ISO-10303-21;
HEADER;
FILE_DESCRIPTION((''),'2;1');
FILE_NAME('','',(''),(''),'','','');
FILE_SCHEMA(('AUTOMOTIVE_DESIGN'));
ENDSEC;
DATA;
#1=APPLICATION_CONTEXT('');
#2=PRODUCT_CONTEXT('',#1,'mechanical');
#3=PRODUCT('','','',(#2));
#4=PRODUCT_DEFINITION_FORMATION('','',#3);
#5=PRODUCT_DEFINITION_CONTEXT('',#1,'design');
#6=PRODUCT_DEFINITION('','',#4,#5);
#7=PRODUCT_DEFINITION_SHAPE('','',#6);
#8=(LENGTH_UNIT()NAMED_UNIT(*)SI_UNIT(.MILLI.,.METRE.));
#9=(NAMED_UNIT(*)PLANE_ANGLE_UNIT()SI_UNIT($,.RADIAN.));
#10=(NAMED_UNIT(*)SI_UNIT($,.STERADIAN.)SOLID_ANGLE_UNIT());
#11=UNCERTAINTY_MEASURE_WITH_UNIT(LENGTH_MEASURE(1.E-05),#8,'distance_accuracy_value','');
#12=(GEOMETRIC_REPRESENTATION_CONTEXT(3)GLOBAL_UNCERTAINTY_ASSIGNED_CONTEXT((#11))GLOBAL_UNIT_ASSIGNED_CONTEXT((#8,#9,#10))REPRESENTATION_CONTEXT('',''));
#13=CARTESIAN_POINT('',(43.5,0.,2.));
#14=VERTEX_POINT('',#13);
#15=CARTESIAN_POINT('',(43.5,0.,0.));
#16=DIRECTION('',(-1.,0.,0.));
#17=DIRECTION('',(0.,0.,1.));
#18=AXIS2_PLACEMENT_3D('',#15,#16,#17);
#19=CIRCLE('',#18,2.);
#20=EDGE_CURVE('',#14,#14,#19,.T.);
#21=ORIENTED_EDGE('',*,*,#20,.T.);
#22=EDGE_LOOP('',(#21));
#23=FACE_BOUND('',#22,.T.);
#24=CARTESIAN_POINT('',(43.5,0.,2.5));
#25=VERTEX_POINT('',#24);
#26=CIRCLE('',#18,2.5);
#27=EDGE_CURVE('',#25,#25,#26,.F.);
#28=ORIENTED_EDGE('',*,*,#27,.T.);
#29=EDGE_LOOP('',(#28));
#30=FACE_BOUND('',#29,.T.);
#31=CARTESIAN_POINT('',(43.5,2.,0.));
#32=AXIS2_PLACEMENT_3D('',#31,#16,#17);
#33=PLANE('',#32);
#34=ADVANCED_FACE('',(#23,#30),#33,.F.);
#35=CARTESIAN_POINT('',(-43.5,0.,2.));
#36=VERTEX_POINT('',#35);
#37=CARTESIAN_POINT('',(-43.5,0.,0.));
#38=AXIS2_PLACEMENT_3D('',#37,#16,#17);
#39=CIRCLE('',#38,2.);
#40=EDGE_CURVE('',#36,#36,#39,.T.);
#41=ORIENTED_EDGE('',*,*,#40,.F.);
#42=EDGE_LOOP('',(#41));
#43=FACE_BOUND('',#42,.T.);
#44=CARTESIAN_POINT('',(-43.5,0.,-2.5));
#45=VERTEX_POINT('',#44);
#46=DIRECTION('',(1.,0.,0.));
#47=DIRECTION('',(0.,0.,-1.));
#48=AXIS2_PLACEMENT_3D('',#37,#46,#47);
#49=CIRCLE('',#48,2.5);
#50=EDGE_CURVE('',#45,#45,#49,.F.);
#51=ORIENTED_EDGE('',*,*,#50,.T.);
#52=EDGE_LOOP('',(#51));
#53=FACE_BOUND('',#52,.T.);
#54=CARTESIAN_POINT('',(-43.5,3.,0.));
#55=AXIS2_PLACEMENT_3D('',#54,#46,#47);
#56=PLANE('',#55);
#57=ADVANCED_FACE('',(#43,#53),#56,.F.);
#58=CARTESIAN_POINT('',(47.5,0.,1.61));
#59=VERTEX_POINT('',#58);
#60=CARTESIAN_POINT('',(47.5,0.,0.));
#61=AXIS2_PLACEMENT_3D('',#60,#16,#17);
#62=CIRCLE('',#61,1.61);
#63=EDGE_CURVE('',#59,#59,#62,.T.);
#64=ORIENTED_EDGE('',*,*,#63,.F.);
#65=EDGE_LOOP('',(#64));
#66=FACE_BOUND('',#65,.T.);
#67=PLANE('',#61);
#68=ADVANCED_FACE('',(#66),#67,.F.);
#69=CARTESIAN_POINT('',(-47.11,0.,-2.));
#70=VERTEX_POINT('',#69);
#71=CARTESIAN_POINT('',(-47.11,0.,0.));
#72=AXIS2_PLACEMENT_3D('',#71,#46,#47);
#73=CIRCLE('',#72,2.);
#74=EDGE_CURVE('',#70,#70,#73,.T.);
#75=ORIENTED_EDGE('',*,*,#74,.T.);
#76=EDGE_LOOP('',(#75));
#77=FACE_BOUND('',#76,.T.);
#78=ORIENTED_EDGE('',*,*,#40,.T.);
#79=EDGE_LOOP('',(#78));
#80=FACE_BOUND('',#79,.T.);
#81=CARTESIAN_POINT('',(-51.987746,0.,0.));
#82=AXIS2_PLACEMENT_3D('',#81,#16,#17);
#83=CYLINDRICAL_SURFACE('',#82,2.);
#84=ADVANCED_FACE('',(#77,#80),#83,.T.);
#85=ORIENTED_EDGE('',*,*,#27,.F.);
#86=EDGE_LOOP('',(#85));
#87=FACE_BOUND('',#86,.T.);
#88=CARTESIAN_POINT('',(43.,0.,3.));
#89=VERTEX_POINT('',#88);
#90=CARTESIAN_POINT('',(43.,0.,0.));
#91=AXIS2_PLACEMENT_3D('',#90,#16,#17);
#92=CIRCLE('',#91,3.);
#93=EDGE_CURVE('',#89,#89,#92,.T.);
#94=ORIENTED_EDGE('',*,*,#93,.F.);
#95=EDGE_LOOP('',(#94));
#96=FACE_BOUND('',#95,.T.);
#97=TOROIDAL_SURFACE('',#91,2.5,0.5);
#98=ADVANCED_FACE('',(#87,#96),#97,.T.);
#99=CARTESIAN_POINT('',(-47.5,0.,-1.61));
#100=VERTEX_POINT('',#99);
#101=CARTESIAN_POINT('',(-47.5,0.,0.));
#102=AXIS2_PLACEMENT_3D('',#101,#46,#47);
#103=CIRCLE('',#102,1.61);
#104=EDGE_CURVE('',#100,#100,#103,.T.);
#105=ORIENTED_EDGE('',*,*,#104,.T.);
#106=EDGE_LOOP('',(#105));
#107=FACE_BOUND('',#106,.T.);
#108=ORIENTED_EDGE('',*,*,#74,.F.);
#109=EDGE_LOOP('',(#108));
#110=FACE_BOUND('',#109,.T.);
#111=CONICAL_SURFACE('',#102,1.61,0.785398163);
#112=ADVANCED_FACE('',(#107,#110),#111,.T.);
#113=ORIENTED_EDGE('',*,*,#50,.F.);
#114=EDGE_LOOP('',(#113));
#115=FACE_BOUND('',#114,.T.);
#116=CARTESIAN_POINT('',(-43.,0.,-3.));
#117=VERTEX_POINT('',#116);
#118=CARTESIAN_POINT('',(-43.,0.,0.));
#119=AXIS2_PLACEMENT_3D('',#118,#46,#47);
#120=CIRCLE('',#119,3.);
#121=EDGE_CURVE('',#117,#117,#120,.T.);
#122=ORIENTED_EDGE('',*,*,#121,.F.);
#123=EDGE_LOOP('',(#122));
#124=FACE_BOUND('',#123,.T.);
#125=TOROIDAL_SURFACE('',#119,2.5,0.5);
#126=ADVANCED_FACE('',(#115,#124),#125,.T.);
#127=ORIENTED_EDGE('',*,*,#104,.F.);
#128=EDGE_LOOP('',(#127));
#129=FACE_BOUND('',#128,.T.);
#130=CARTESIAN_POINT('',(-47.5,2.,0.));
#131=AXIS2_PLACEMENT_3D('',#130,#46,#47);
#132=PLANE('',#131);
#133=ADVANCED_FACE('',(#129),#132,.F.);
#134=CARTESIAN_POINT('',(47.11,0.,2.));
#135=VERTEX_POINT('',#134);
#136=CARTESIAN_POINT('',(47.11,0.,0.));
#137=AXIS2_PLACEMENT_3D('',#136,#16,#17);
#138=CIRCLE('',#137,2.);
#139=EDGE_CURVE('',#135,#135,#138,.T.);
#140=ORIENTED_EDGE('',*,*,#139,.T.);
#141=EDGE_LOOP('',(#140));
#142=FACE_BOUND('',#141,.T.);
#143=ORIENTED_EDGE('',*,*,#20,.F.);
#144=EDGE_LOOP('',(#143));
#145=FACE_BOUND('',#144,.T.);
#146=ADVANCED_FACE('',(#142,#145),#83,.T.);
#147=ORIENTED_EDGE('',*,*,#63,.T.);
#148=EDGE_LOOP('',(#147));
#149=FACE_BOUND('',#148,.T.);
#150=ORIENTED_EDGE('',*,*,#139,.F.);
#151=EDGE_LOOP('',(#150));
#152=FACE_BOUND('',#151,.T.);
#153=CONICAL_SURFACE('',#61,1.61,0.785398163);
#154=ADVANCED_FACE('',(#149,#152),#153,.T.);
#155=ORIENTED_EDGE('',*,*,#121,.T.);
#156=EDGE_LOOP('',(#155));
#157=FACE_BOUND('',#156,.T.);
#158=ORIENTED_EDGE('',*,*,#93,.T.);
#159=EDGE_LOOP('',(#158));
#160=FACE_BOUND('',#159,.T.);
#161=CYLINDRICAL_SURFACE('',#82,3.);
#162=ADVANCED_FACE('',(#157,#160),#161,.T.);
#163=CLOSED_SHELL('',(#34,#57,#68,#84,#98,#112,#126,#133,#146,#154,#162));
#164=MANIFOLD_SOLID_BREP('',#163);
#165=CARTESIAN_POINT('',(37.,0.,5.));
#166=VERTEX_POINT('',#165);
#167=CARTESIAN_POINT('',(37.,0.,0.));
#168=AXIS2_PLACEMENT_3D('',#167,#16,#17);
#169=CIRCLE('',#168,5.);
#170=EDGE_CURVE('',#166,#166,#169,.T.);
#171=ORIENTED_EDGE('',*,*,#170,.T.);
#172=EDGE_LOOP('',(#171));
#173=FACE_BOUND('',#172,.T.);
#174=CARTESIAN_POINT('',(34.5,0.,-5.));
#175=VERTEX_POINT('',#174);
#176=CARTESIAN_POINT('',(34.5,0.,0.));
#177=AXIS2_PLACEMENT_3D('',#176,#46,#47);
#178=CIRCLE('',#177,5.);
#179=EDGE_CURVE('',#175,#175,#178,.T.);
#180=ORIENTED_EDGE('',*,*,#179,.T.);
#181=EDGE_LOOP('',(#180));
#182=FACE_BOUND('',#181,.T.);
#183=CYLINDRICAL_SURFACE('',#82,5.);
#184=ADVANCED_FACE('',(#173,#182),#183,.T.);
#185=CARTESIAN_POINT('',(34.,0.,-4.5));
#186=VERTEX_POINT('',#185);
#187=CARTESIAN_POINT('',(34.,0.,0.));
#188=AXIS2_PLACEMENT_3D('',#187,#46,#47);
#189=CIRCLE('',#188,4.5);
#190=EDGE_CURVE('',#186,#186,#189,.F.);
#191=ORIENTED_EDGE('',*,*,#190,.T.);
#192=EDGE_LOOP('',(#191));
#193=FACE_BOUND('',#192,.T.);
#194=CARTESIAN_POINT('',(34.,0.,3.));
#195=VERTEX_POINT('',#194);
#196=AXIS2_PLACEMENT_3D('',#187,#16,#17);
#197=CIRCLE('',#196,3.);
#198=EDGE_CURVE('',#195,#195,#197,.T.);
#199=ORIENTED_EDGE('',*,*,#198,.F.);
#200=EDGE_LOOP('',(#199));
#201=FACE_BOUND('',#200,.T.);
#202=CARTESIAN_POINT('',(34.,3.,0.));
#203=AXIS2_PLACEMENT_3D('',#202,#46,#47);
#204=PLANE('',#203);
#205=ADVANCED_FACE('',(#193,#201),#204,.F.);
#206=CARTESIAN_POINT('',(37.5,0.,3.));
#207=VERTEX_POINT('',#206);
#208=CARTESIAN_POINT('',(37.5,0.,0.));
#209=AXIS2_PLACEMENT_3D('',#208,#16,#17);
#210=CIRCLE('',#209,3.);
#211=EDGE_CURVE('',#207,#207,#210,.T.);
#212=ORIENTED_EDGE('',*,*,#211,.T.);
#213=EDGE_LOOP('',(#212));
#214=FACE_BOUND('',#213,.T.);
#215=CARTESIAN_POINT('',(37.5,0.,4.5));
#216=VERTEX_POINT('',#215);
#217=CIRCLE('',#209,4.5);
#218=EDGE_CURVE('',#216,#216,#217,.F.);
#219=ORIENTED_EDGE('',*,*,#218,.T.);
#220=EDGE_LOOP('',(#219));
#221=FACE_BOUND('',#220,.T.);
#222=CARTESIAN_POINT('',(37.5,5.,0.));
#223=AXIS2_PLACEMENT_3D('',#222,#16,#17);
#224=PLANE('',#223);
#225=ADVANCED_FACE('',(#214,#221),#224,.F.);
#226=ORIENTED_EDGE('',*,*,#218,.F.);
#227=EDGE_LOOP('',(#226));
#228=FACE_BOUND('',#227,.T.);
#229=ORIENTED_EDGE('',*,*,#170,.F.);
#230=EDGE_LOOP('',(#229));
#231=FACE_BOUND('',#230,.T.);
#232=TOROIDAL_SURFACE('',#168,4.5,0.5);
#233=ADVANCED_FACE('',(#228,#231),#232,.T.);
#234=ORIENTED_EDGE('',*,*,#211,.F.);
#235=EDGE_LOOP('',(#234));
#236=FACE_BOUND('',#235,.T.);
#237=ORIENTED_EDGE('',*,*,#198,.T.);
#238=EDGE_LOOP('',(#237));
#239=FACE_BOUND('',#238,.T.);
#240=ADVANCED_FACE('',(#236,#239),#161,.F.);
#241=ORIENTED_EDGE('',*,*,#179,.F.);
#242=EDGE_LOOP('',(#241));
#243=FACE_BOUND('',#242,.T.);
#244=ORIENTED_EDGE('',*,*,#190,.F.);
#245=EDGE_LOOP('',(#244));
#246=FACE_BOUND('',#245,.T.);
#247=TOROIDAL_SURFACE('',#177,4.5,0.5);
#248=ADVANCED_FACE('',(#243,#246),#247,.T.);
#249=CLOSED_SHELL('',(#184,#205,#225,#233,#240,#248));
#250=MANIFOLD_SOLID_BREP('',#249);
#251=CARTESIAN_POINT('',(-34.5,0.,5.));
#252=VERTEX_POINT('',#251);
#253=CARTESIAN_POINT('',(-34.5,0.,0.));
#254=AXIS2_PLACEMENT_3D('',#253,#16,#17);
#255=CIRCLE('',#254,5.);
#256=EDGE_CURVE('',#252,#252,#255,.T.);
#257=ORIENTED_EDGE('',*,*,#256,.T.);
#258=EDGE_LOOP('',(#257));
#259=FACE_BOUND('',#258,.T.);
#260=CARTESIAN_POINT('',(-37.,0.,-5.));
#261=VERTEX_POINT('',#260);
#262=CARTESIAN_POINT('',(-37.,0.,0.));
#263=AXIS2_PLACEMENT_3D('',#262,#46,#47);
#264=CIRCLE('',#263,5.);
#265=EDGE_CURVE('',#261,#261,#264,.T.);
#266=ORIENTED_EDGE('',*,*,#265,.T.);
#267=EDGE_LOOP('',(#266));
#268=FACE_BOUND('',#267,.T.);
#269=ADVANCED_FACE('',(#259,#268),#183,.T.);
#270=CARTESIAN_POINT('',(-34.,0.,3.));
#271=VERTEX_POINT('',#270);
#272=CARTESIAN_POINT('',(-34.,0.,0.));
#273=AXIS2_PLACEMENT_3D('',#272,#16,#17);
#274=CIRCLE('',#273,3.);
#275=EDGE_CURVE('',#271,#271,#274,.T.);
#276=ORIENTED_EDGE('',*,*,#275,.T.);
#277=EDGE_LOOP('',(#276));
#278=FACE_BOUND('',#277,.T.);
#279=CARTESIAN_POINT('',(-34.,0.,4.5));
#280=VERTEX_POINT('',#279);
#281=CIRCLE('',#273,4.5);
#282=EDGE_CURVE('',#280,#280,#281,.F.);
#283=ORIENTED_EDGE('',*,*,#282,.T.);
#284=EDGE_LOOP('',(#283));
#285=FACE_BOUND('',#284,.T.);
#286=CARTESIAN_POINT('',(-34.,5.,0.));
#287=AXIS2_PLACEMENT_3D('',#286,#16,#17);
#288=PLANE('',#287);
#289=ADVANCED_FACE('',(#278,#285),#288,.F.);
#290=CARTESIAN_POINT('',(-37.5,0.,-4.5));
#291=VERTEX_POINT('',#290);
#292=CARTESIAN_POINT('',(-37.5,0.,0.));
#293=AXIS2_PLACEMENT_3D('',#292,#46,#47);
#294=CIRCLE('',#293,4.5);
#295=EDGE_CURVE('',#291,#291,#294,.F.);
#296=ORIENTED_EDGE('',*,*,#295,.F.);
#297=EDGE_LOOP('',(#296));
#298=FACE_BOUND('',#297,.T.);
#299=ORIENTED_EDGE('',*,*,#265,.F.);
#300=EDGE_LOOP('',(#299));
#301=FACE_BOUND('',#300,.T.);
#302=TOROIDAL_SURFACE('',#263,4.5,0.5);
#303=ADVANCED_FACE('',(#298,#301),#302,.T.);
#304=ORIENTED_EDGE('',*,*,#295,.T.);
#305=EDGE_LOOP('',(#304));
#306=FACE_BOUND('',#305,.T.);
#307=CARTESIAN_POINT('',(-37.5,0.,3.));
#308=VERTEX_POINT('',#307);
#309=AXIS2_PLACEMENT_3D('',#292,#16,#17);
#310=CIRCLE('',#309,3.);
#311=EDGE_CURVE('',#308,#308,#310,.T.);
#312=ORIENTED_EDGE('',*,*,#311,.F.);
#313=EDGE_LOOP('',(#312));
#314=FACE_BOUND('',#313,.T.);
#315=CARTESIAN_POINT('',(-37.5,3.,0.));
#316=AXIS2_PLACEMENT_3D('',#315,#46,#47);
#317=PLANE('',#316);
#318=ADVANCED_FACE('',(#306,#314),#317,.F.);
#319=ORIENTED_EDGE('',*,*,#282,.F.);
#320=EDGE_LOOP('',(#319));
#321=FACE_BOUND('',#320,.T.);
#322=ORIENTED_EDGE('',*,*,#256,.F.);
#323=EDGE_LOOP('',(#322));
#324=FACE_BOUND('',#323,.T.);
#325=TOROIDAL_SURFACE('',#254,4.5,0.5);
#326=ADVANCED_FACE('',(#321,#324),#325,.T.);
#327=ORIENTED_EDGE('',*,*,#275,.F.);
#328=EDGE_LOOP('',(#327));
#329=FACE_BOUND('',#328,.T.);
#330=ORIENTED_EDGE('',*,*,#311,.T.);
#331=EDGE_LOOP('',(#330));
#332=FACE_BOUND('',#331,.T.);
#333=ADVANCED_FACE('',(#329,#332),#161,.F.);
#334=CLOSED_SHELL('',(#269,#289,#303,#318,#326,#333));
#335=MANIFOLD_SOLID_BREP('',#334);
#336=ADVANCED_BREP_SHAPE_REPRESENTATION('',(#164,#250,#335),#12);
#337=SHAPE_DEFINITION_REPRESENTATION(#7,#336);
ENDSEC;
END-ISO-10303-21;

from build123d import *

# Parameters (mm, degrees)
SKETCH2_W = 3.5
SKETCH2_H = 2
FILLET1_R = 0.5
FILLET2_R = 0.5
FILLET3_R = 0.5


# Read off the part's stored shape, not the designer's step: M4x0.7 Machine Threads Stud1, M4x0.7 Machine Threads Stud2
with BuildPart() as part:
    # Sketch1 → Revolve1 (revolve)
    with BuildSketch(Plane.XY, mode=Mode.PRIVATE) as revolve1_sk:
        Polygon((47.5, 0), (47.5, 2), (43.5, 2), (43.5, 3), (-43.5, 3), (-43.5, 2), (-47.5, 2), (-47.5, 0), align=None)
    revolve(revolve1_sk.sketch.rotate(Axis((-51.987746382, 0, 0), (1, 0, 0)), 90), axis=Axis((-51.987746382, 0, 0), (1, 0, 0)))

    # M4x0.7 Machine Threads Stud1 outline → M4x0.7 Machine Threads Stud1 (revolve, cut)
    with BuildSketch(Plane.YX):
        Polygon((2, 47.5), (1.61, 47.5), (2, 47.11), align=None)
    revolve(axis=Axis((0, 0, 0), (1, 0, 0)), mode=Mode.SUBTRACT)

    # M4x0.7 Machine Threads Stud2 outline → M4x0.7 Machine Threads Stud2 (revolve, cut)
    with BuildSketch(Plane.YX):
        Polygon((2, -47.11), (1.61, -47.5), (2, -47.5), align=None)
    revolve(axis=Axis((0, 0, 0), (1, 0, 0)), mode=Mode.SUBTRACT)

    # Fillet3
    fillet3_edges = [part.edges().sort_by_distance(p)[0] for p in [
        (-43.5, 0, -3),
        (43.5, 0, -3),
    ]]
    fillet(fillet3_edges, radius=FILLET3_R)


with BuildPart() as body_2:
    # Sketch2 → Revolve2 (revolve)
    with BuildSketch(Plane.XY, mode=Mode.PRIVATE) as revolve2_sk:
        with Locations((-35.75, 4)):
            Rectangle(SKETCH2_W, SKETCH2_H)
        with Locations((35.75, 4)):
            Rectangle(SKETCH2_W, SKETCH2_H)
    revolve(revolve2_sk.sketch.rotate(Axis((-51.987746382, 0, 0), (1, 0, 0)), 90), axis=Axis((-51.987746382, 0, 0), (1, 0, 0)))

    # Fillet1
    fillet1_edges = [body_2.edges().sort_by_distance(p)[0] for p in [
        (-34, 0, -5),
        (-37.5, 0, -5),
    ]]
    fillet(fillet1_edges, radius=FILLET1_R)

    # Fillet2
    fillet2_edges = [body_2.edges().sort_by_distance(p)[0] for p in [
        (37.5, 0, -5),
        (34, 0, -5),
    ]]
    fillet(fillet2_edges, radius=FILLET2_R)


solid = Compound([part.part, body_2.part])
